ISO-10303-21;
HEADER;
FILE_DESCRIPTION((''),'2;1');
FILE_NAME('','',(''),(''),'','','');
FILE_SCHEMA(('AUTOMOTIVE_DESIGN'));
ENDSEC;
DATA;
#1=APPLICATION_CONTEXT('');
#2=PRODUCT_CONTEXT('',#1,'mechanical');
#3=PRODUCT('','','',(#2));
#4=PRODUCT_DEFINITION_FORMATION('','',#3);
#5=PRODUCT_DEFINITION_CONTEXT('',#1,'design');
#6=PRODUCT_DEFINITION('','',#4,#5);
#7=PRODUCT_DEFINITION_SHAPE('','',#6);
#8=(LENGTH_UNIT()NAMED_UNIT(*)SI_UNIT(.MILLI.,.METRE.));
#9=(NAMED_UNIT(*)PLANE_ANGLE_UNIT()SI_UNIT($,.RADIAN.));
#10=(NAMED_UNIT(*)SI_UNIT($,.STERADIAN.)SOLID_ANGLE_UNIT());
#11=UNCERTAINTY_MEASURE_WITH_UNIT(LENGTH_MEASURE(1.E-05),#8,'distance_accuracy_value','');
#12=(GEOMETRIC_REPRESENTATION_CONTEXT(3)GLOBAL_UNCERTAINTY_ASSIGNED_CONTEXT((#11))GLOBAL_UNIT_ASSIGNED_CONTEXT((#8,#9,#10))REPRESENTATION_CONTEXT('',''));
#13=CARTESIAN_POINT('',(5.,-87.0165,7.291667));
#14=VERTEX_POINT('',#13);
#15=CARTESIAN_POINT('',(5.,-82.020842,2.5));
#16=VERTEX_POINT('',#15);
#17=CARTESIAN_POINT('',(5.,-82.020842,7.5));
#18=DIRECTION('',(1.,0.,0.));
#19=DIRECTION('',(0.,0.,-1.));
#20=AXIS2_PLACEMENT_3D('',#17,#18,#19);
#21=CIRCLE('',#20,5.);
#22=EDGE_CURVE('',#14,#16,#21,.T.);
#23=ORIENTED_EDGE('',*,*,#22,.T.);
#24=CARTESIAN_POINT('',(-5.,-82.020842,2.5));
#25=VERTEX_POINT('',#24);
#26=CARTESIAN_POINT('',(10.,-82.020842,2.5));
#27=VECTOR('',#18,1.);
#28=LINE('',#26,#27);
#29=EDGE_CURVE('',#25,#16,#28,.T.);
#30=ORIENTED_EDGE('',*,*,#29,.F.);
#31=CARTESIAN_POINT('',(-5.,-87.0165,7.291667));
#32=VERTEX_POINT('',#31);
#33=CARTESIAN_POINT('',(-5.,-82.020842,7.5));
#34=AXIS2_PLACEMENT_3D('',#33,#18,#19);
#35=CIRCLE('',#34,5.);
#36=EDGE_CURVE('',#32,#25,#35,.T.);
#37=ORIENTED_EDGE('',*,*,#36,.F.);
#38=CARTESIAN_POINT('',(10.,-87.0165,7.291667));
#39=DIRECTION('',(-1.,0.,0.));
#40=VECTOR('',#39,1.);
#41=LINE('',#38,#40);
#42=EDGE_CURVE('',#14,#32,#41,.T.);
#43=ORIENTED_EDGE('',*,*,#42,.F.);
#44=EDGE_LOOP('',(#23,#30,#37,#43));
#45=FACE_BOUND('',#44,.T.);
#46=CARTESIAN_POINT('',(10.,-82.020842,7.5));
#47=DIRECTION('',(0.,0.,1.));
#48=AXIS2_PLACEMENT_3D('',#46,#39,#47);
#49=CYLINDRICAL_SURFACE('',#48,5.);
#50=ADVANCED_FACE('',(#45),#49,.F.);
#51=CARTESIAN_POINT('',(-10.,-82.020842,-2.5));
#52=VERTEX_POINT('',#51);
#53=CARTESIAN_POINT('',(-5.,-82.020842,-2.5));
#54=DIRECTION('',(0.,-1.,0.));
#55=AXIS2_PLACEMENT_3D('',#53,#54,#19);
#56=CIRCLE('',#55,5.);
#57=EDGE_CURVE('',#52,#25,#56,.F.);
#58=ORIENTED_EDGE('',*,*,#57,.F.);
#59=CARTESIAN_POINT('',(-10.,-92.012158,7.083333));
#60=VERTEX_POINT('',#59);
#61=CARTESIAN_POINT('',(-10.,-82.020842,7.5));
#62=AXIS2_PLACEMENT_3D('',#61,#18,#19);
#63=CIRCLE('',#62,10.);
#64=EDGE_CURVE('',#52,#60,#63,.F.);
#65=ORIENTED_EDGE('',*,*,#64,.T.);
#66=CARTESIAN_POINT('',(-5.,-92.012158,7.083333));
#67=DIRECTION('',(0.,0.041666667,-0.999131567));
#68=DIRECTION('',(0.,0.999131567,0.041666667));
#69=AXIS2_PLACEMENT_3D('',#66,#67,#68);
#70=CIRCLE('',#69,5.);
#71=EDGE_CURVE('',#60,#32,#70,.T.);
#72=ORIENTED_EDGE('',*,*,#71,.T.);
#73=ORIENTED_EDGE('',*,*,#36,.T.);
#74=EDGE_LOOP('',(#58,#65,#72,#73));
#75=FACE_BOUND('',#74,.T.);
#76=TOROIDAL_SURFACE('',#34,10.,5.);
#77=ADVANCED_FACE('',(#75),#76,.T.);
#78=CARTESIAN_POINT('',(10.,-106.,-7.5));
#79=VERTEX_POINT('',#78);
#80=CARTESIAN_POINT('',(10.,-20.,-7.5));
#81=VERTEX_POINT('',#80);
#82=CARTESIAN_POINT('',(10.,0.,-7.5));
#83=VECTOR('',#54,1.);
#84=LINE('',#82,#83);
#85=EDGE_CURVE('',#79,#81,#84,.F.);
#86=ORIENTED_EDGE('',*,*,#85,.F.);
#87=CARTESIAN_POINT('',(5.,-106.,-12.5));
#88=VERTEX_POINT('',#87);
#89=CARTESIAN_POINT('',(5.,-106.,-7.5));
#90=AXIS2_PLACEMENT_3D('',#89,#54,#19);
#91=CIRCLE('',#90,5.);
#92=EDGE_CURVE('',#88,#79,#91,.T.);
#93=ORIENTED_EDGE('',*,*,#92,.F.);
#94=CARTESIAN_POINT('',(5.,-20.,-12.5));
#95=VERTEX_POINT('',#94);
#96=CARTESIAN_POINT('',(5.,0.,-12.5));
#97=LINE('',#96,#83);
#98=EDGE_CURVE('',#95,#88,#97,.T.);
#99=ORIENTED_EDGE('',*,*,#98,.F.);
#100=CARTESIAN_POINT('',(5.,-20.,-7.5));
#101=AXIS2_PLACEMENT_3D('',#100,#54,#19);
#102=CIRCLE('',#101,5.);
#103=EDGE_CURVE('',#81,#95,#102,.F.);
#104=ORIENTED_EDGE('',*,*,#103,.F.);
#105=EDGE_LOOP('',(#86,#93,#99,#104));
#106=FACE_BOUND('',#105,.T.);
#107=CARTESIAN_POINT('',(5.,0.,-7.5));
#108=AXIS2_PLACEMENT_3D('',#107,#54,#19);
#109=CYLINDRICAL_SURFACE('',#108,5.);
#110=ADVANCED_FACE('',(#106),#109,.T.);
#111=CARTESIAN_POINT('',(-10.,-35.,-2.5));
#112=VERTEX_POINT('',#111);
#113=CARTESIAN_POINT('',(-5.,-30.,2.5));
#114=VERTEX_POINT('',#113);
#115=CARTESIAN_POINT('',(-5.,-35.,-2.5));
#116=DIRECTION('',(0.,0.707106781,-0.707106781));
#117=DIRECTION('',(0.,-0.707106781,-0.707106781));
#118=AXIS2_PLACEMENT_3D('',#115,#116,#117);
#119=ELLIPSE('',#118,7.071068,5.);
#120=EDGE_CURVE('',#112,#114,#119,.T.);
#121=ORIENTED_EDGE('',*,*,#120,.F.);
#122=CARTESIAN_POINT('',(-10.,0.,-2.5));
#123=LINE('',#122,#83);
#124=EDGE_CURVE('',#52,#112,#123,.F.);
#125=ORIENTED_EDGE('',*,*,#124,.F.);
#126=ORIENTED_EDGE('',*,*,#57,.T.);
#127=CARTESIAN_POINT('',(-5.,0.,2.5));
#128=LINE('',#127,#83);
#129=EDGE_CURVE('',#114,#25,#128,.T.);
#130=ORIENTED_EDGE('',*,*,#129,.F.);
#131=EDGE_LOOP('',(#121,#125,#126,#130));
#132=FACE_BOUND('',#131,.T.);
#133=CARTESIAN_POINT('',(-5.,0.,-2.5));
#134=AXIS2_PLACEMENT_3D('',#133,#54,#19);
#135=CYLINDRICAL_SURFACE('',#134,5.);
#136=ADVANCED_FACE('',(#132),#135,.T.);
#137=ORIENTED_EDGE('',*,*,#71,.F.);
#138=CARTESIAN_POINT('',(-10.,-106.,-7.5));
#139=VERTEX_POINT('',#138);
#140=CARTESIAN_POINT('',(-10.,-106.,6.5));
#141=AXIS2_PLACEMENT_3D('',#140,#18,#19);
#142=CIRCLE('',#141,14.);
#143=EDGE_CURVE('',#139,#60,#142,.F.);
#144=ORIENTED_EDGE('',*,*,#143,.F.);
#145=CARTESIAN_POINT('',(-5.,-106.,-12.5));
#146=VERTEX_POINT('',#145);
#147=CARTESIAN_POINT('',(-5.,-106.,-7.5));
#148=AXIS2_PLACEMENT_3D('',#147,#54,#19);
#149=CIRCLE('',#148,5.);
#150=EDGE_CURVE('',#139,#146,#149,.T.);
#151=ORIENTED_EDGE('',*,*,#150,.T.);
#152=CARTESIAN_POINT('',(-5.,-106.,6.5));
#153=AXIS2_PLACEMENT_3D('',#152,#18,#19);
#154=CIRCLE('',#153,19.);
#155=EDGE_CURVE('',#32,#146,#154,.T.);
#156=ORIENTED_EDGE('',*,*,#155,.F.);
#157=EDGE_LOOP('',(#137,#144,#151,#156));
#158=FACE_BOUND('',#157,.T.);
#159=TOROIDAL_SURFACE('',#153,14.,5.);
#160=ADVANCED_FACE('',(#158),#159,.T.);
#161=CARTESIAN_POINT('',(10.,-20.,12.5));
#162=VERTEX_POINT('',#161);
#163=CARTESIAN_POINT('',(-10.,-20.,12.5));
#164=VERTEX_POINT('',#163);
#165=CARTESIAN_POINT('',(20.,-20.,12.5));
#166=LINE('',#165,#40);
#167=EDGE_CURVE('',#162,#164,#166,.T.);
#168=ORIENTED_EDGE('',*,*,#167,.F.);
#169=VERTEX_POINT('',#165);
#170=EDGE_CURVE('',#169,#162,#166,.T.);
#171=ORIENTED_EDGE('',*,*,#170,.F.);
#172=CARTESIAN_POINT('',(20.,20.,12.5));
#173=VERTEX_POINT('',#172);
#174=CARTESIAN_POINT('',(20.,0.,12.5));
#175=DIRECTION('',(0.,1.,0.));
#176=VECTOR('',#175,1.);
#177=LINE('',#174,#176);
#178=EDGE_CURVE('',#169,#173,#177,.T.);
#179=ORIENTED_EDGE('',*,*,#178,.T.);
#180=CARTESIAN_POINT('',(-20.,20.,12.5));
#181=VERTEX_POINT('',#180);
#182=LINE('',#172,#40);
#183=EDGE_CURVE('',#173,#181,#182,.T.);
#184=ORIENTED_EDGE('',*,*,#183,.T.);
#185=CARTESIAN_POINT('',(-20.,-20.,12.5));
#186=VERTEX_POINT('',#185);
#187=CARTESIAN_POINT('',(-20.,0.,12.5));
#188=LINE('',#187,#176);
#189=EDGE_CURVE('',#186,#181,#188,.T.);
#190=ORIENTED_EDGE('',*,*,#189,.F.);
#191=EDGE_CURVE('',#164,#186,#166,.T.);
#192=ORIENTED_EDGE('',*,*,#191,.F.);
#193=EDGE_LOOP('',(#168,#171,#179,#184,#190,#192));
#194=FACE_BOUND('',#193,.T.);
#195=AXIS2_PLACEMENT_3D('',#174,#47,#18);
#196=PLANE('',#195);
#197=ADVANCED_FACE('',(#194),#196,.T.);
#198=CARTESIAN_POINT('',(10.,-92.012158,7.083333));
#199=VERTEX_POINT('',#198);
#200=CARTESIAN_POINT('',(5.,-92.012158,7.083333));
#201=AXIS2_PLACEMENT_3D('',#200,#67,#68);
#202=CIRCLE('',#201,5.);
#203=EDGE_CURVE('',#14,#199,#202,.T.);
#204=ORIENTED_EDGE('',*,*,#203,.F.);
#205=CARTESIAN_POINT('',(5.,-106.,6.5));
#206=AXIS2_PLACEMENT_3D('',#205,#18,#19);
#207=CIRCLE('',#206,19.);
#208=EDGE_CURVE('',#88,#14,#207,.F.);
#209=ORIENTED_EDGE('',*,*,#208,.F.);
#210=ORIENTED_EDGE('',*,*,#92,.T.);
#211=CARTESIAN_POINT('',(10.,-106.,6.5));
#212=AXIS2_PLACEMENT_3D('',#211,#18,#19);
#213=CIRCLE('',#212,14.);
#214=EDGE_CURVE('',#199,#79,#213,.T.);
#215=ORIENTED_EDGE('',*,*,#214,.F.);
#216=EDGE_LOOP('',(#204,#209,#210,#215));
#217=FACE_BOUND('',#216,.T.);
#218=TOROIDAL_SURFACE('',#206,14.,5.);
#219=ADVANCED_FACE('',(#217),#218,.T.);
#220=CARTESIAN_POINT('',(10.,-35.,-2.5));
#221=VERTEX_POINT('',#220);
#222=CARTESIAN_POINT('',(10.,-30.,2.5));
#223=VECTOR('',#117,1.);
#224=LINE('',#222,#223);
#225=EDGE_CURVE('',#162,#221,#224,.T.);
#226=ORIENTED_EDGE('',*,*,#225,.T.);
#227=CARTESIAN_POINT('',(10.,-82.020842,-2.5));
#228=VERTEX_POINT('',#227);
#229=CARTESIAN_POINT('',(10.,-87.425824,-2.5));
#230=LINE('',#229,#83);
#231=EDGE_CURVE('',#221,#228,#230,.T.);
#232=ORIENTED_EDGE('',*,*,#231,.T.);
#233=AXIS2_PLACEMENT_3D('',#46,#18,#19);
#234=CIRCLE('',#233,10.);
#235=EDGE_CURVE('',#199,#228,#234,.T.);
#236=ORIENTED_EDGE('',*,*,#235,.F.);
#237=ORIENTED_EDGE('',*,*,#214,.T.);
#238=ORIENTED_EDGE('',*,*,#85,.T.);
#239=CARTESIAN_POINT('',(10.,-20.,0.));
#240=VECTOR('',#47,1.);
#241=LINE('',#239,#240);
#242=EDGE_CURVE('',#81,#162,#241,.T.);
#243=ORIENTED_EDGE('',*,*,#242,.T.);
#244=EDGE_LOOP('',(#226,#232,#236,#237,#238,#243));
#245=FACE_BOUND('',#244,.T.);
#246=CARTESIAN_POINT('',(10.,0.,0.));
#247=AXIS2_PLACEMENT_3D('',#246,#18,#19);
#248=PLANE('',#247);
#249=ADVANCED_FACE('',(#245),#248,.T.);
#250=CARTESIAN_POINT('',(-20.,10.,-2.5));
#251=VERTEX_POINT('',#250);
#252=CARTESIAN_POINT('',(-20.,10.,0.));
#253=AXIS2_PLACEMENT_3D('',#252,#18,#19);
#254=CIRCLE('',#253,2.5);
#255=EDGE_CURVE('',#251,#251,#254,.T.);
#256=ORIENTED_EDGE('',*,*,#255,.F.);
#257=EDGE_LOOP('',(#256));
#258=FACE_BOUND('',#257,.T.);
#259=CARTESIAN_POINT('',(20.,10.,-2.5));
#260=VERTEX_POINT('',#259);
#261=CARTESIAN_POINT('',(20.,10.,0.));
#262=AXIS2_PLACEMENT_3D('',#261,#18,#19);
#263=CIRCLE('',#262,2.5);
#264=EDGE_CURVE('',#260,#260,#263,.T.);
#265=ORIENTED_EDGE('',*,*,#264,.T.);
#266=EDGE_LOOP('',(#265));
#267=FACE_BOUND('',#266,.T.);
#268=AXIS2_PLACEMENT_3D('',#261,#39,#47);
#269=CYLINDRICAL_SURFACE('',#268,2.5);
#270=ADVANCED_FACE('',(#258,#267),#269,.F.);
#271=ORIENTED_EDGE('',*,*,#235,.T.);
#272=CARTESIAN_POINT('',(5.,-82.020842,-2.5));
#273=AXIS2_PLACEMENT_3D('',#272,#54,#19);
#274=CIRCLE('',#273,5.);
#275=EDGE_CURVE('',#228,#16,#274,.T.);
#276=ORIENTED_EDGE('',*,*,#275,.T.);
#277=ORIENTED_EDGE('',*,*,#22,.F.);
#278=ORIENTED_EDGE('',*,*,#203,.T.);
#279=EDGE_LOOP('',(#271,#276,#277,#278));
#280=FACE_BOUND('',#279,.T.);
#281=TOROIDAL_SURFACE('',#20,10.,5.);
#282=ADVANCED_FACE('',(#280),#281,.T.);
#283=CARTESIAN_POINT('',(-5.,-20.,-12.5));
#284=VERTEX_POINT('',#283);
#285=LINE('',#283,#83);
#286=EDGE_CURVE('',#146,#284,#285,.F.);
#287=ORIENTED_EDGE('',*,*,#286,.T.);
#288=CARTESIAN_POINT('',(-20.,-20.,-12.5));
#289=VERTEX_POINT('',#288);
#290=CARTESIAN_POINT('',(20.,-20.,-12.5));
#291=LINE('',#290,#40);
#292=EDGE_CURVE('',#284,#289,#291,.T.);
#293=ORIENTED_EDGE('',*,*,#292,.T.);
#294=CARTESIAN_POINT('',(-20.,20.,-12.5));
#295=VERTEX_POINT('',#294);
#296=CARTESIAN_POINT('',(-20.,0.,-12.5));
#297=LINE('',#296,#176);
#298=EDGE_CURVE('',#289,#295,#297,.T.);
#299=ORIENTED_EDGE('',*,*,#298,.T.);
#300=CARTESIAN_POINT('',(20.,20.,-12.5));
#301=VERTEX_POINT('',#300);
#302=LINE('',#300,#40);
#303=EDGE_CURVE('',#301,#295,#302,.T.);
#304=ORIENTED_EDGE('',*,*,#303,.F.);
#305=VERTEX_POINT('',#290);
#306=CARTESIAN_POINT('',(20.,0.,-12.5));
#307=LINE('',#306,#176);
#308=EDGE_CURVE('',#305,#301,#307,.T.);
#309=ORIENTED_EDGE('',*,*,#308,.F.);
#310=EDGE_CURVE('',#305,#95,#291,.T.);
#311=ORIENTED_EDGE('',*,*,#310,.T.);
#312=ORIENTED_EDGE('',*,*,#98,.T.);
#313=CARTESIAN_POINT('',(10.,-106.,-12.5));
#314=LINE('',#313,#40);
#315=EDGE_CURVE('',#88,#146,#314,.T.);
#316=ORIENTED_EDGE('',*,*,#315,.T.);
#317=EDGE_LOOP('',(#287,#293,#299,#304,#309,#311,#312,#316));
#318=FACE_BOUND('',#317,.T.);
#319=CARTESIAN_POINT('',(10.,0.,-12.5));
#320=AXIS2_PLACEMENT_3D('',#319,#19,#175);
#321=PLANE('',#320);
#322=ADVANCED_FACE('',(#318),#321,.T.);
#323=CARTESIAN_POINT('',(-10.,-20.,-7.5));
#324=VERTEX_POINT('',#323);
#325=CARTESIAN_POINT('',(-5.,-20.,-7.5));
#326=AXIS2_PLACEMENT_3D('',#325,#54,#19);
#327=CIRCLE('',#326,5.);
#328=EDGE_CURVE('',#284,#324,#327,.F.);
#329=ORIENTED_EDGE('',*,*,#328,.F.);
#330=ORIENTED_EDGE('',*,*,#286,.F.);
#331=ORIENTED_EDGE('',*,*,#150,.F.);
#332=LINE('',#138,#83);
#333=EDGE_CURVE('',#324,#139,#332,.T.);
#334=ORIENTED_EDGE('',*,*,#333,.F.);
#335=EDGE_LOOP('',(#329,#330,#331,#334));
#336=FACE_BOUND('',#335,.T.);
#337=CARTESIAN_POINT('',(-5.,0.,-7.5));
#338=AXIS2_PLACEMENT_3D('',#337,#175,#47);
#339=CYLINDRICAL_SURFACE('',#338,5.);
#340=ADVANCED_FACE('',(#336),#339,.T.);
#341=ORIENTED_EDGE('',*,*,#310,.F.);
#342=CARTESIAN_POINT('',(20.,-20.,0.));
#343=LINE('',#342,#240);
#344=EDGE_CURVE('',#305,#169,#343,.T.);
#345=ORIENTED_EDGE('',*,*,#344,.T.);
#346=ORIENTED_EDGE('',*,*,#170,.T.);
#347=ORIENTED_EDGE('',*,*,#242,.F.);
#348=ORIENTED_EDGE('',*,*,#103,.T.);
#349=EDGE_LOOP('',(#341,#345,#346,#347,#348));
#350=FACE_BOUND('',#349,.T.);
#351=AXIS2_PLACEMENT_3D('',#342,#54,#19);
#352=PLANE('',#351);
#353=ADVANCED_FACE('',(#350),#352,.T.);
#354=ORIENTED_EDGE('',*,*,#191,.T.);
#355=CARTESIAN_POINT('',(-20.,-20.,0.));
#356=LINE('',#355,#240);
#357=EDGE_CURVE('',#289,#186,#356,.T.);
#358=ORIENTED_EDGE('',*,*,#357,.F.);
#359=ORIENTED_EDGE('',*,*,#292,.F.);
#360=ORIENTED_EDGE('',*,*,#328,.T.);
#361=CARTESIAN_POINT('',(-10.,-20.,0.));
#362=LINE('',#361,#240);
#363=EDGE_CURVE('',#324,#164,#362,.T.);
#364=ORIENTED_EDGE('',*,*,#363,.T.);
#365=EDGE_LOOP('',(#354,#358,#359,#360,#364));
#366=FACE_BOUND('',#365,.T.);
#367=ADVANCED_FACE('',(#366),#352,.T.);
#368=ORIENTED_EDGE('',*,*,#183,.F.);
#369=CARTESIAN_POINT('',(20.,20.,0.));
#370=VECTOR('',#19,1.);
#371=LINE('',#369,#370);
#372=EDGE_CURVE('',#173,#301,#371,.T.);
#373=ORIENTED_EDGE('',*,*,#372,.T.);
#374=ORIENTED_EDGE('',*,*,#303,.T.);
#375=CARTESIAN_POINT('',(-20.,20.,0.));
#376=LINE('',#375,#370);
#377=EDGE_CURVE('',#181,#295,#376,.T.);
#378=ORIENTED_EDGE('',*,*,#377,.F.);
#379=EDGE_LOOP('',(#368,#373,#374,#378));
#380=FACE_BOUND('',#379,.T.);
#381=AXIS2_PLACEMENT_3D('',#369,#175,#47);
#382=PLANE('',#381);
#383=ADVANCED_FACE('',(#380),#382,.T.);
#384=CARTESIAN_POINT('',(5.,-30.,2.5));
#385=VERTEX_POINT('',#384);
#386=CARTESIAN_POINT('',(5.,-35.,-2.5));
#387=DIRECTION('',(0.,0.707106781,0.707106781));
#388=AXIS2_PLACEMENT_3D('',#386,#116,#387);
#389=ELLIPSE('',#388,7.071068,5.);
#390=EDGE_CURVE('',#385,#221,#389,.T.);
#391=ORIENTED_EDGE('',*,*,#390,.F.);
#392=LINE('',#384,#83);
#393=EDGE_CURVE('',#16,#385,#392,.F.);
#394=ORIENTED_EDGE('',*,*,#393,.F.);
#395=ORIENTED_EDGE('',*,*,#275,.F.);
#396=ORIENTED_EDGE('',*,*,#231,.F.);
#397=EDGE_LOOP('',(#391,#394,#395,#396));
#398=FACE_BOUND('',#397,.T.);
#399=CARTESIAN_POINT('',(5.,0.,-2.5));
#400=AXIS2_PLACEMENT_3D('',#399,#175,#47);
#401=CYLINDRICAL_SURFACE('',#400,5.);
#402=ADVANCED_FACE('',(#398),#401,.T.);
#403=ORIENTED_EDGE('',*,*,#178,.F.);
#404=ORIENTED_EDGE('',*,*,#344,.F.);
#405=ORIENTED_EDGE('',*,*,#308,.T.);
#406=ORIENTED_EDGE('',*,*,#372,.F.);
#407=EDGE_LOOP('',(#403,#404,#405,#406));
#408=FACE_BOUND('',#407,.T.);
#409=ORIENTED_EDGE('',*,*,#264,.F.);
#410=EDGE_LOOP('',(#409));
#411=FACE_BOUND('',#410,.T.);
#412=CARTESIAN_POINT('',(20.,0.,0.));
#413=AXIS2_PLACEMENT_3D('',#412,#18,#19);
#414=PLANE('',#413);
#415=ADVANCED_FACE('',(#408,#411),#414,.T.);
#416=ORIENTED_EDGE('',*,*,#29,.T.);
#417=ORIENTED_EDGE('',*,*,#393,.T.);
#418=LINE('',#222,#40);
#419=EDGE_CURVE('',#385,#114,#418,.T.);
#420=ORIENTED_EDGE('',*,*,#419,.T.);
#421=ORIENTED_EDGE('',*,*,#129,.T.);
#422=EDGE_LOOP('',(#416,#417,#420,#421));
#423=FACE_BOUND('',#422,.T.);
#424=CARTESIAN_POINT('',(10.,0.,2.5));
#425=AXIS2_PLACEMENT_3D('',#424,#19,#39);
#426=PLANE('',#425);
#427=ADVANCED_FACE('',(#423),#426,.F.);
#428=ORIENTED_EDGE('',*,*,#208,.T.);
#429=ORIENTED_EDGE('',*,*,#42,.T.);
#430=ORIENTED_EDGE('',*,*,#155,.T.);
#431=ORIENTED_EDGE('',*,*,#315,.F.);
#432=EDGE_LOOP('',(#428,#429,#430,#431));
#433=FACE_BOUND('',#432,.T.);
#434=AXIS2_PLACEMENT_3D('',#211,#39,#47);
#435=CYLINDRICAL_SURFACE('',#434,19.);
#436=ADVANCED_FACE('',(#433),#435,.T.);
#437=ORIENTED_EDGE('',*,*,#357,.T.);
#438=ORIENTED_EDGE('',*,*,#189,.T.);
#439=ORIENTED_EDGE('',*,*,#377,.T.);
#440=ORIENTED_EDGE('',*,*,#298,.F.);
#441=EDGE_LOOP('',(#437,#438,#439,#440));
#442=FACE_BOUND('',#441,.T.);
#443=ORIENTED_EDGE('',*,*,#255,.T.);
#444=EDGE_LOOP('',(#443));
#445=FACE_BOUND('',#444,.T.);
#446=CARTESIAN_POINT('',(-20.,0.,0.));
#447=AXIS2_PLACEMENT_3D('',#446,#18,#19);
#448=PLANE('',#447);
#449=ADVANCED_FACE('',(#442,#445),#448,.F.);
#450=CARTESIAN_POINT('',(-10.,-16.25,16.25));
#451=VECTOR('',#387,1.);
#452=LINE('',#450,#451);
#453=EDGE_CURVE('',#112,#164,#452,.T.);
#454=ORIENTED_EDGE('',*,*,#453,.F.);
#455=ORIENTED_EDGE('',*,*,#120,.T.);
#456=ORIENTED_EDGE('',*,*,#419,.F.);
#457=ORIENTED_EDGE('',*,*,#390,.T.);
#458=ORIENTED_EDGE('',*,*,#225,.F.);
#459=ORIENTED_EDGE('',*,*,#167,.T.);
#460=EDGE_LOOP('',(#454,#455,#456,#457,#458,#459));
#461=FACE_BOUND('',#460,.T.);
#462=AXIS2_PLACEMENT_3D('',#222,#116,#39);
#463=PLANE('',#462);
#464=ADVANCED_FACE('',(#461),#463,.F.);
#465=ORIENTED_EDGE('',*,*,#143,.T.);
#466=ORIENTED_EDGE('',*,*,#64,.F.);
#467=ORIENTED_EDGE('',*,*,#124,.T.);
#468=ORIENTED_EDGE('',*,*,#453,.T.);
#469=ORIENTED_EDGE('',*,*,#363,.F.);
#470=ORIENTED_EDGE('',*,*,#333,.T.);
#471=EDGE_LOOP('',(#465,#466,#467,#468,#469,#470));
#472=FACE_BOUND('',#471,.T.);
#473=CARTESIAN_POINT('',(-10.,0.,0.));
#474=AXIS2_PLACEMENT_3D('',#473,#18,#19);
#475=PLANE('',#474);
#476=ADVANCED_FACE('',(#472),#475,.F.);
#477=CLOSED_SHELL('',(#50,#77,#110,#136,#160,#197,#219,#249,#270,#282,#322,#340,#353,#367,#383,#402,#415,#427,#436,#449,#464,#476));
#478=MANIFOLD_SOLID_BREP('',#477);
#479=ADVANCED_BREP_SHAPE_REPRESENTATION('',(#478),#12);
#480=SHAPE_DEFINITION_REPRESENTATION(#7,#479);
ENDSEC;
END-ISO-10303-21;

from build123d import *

# Parameters (mm, degrees)
BOSS_EXTRUDE2_DEPTH = 10
SKETCH1_5_R         = 2.5
BOSS_EXTRUDE3_DEPTH = 20
CHAMFER1_SIZE       = 10
FILLET1_R           = 5


with BuildPart() as part:
    # Sketch1 → Boss-Extrude2 (new, symmetric)
    with BuildSketch(Plane(origin=(0, 0, 0), x_dir=(0, 0, -1), z_dir=(1, 0, 0))):
        with BuildLine():
            Line((-2.5, -20), (-2.5, -87.425824379))
            ThreePointArc((-2.5, -87.425824379), (-21.281745499, -117.937336386), (12.5, -106))
            Line((12.5, -106), (12.5, -20))
            Line((12.5, -20), (-2.5, -20))
        make_face()
    extrude(amount=BOSS_EXTRUDE2_DEPTH, both=True)

    # Sketch1<5> → Boss-Extrude3 (add, symmetric)
    with BuildSketch(Plane(origin=(0, 0, 0), x_dir=(0, 0, -1), z_dir=(1, 0, 0))):
        Polygon((12.5, -20), (-2.5, -20), (-12.5, -20), (-12.5, 20), (12.5, 20), align=None)
        with Locations((0, 10)):
            Circle(SKETCH1_5_R, mode=Mode.SUBTRACT)
    extrude(amount=BOSS_EXTRUDE3_DEPTH, both=True)

    # Chamfer1
    chamfer1_edges = [part.edges().sort_by_distance(p)[0] for p in [
        (0, -20, 2.5),
    ]]
    chamfer(chamfer1_edges, length=CHAMFER1_SIZE - 0.0001)  # a hair under: the kernel refuses the full size

    # Fillet1
    fillet1_edges = [part.edges().sort_by_distance(p)[0] for p in [
        (10, -117.937336386, 21.281745499),
        (10, -63, -12.5),
        (-10, -58.712862189, 2.5),
        (10, -58.712862189, 2.5),
        (-10, -63, -12.5),
        (-10, -117.937336386, 21.281745499),
        (0, -87.425824379, 2.5),
    ]]
    fillet(fillet1_edges, radius=FILLET1_R)


solid = part.part
